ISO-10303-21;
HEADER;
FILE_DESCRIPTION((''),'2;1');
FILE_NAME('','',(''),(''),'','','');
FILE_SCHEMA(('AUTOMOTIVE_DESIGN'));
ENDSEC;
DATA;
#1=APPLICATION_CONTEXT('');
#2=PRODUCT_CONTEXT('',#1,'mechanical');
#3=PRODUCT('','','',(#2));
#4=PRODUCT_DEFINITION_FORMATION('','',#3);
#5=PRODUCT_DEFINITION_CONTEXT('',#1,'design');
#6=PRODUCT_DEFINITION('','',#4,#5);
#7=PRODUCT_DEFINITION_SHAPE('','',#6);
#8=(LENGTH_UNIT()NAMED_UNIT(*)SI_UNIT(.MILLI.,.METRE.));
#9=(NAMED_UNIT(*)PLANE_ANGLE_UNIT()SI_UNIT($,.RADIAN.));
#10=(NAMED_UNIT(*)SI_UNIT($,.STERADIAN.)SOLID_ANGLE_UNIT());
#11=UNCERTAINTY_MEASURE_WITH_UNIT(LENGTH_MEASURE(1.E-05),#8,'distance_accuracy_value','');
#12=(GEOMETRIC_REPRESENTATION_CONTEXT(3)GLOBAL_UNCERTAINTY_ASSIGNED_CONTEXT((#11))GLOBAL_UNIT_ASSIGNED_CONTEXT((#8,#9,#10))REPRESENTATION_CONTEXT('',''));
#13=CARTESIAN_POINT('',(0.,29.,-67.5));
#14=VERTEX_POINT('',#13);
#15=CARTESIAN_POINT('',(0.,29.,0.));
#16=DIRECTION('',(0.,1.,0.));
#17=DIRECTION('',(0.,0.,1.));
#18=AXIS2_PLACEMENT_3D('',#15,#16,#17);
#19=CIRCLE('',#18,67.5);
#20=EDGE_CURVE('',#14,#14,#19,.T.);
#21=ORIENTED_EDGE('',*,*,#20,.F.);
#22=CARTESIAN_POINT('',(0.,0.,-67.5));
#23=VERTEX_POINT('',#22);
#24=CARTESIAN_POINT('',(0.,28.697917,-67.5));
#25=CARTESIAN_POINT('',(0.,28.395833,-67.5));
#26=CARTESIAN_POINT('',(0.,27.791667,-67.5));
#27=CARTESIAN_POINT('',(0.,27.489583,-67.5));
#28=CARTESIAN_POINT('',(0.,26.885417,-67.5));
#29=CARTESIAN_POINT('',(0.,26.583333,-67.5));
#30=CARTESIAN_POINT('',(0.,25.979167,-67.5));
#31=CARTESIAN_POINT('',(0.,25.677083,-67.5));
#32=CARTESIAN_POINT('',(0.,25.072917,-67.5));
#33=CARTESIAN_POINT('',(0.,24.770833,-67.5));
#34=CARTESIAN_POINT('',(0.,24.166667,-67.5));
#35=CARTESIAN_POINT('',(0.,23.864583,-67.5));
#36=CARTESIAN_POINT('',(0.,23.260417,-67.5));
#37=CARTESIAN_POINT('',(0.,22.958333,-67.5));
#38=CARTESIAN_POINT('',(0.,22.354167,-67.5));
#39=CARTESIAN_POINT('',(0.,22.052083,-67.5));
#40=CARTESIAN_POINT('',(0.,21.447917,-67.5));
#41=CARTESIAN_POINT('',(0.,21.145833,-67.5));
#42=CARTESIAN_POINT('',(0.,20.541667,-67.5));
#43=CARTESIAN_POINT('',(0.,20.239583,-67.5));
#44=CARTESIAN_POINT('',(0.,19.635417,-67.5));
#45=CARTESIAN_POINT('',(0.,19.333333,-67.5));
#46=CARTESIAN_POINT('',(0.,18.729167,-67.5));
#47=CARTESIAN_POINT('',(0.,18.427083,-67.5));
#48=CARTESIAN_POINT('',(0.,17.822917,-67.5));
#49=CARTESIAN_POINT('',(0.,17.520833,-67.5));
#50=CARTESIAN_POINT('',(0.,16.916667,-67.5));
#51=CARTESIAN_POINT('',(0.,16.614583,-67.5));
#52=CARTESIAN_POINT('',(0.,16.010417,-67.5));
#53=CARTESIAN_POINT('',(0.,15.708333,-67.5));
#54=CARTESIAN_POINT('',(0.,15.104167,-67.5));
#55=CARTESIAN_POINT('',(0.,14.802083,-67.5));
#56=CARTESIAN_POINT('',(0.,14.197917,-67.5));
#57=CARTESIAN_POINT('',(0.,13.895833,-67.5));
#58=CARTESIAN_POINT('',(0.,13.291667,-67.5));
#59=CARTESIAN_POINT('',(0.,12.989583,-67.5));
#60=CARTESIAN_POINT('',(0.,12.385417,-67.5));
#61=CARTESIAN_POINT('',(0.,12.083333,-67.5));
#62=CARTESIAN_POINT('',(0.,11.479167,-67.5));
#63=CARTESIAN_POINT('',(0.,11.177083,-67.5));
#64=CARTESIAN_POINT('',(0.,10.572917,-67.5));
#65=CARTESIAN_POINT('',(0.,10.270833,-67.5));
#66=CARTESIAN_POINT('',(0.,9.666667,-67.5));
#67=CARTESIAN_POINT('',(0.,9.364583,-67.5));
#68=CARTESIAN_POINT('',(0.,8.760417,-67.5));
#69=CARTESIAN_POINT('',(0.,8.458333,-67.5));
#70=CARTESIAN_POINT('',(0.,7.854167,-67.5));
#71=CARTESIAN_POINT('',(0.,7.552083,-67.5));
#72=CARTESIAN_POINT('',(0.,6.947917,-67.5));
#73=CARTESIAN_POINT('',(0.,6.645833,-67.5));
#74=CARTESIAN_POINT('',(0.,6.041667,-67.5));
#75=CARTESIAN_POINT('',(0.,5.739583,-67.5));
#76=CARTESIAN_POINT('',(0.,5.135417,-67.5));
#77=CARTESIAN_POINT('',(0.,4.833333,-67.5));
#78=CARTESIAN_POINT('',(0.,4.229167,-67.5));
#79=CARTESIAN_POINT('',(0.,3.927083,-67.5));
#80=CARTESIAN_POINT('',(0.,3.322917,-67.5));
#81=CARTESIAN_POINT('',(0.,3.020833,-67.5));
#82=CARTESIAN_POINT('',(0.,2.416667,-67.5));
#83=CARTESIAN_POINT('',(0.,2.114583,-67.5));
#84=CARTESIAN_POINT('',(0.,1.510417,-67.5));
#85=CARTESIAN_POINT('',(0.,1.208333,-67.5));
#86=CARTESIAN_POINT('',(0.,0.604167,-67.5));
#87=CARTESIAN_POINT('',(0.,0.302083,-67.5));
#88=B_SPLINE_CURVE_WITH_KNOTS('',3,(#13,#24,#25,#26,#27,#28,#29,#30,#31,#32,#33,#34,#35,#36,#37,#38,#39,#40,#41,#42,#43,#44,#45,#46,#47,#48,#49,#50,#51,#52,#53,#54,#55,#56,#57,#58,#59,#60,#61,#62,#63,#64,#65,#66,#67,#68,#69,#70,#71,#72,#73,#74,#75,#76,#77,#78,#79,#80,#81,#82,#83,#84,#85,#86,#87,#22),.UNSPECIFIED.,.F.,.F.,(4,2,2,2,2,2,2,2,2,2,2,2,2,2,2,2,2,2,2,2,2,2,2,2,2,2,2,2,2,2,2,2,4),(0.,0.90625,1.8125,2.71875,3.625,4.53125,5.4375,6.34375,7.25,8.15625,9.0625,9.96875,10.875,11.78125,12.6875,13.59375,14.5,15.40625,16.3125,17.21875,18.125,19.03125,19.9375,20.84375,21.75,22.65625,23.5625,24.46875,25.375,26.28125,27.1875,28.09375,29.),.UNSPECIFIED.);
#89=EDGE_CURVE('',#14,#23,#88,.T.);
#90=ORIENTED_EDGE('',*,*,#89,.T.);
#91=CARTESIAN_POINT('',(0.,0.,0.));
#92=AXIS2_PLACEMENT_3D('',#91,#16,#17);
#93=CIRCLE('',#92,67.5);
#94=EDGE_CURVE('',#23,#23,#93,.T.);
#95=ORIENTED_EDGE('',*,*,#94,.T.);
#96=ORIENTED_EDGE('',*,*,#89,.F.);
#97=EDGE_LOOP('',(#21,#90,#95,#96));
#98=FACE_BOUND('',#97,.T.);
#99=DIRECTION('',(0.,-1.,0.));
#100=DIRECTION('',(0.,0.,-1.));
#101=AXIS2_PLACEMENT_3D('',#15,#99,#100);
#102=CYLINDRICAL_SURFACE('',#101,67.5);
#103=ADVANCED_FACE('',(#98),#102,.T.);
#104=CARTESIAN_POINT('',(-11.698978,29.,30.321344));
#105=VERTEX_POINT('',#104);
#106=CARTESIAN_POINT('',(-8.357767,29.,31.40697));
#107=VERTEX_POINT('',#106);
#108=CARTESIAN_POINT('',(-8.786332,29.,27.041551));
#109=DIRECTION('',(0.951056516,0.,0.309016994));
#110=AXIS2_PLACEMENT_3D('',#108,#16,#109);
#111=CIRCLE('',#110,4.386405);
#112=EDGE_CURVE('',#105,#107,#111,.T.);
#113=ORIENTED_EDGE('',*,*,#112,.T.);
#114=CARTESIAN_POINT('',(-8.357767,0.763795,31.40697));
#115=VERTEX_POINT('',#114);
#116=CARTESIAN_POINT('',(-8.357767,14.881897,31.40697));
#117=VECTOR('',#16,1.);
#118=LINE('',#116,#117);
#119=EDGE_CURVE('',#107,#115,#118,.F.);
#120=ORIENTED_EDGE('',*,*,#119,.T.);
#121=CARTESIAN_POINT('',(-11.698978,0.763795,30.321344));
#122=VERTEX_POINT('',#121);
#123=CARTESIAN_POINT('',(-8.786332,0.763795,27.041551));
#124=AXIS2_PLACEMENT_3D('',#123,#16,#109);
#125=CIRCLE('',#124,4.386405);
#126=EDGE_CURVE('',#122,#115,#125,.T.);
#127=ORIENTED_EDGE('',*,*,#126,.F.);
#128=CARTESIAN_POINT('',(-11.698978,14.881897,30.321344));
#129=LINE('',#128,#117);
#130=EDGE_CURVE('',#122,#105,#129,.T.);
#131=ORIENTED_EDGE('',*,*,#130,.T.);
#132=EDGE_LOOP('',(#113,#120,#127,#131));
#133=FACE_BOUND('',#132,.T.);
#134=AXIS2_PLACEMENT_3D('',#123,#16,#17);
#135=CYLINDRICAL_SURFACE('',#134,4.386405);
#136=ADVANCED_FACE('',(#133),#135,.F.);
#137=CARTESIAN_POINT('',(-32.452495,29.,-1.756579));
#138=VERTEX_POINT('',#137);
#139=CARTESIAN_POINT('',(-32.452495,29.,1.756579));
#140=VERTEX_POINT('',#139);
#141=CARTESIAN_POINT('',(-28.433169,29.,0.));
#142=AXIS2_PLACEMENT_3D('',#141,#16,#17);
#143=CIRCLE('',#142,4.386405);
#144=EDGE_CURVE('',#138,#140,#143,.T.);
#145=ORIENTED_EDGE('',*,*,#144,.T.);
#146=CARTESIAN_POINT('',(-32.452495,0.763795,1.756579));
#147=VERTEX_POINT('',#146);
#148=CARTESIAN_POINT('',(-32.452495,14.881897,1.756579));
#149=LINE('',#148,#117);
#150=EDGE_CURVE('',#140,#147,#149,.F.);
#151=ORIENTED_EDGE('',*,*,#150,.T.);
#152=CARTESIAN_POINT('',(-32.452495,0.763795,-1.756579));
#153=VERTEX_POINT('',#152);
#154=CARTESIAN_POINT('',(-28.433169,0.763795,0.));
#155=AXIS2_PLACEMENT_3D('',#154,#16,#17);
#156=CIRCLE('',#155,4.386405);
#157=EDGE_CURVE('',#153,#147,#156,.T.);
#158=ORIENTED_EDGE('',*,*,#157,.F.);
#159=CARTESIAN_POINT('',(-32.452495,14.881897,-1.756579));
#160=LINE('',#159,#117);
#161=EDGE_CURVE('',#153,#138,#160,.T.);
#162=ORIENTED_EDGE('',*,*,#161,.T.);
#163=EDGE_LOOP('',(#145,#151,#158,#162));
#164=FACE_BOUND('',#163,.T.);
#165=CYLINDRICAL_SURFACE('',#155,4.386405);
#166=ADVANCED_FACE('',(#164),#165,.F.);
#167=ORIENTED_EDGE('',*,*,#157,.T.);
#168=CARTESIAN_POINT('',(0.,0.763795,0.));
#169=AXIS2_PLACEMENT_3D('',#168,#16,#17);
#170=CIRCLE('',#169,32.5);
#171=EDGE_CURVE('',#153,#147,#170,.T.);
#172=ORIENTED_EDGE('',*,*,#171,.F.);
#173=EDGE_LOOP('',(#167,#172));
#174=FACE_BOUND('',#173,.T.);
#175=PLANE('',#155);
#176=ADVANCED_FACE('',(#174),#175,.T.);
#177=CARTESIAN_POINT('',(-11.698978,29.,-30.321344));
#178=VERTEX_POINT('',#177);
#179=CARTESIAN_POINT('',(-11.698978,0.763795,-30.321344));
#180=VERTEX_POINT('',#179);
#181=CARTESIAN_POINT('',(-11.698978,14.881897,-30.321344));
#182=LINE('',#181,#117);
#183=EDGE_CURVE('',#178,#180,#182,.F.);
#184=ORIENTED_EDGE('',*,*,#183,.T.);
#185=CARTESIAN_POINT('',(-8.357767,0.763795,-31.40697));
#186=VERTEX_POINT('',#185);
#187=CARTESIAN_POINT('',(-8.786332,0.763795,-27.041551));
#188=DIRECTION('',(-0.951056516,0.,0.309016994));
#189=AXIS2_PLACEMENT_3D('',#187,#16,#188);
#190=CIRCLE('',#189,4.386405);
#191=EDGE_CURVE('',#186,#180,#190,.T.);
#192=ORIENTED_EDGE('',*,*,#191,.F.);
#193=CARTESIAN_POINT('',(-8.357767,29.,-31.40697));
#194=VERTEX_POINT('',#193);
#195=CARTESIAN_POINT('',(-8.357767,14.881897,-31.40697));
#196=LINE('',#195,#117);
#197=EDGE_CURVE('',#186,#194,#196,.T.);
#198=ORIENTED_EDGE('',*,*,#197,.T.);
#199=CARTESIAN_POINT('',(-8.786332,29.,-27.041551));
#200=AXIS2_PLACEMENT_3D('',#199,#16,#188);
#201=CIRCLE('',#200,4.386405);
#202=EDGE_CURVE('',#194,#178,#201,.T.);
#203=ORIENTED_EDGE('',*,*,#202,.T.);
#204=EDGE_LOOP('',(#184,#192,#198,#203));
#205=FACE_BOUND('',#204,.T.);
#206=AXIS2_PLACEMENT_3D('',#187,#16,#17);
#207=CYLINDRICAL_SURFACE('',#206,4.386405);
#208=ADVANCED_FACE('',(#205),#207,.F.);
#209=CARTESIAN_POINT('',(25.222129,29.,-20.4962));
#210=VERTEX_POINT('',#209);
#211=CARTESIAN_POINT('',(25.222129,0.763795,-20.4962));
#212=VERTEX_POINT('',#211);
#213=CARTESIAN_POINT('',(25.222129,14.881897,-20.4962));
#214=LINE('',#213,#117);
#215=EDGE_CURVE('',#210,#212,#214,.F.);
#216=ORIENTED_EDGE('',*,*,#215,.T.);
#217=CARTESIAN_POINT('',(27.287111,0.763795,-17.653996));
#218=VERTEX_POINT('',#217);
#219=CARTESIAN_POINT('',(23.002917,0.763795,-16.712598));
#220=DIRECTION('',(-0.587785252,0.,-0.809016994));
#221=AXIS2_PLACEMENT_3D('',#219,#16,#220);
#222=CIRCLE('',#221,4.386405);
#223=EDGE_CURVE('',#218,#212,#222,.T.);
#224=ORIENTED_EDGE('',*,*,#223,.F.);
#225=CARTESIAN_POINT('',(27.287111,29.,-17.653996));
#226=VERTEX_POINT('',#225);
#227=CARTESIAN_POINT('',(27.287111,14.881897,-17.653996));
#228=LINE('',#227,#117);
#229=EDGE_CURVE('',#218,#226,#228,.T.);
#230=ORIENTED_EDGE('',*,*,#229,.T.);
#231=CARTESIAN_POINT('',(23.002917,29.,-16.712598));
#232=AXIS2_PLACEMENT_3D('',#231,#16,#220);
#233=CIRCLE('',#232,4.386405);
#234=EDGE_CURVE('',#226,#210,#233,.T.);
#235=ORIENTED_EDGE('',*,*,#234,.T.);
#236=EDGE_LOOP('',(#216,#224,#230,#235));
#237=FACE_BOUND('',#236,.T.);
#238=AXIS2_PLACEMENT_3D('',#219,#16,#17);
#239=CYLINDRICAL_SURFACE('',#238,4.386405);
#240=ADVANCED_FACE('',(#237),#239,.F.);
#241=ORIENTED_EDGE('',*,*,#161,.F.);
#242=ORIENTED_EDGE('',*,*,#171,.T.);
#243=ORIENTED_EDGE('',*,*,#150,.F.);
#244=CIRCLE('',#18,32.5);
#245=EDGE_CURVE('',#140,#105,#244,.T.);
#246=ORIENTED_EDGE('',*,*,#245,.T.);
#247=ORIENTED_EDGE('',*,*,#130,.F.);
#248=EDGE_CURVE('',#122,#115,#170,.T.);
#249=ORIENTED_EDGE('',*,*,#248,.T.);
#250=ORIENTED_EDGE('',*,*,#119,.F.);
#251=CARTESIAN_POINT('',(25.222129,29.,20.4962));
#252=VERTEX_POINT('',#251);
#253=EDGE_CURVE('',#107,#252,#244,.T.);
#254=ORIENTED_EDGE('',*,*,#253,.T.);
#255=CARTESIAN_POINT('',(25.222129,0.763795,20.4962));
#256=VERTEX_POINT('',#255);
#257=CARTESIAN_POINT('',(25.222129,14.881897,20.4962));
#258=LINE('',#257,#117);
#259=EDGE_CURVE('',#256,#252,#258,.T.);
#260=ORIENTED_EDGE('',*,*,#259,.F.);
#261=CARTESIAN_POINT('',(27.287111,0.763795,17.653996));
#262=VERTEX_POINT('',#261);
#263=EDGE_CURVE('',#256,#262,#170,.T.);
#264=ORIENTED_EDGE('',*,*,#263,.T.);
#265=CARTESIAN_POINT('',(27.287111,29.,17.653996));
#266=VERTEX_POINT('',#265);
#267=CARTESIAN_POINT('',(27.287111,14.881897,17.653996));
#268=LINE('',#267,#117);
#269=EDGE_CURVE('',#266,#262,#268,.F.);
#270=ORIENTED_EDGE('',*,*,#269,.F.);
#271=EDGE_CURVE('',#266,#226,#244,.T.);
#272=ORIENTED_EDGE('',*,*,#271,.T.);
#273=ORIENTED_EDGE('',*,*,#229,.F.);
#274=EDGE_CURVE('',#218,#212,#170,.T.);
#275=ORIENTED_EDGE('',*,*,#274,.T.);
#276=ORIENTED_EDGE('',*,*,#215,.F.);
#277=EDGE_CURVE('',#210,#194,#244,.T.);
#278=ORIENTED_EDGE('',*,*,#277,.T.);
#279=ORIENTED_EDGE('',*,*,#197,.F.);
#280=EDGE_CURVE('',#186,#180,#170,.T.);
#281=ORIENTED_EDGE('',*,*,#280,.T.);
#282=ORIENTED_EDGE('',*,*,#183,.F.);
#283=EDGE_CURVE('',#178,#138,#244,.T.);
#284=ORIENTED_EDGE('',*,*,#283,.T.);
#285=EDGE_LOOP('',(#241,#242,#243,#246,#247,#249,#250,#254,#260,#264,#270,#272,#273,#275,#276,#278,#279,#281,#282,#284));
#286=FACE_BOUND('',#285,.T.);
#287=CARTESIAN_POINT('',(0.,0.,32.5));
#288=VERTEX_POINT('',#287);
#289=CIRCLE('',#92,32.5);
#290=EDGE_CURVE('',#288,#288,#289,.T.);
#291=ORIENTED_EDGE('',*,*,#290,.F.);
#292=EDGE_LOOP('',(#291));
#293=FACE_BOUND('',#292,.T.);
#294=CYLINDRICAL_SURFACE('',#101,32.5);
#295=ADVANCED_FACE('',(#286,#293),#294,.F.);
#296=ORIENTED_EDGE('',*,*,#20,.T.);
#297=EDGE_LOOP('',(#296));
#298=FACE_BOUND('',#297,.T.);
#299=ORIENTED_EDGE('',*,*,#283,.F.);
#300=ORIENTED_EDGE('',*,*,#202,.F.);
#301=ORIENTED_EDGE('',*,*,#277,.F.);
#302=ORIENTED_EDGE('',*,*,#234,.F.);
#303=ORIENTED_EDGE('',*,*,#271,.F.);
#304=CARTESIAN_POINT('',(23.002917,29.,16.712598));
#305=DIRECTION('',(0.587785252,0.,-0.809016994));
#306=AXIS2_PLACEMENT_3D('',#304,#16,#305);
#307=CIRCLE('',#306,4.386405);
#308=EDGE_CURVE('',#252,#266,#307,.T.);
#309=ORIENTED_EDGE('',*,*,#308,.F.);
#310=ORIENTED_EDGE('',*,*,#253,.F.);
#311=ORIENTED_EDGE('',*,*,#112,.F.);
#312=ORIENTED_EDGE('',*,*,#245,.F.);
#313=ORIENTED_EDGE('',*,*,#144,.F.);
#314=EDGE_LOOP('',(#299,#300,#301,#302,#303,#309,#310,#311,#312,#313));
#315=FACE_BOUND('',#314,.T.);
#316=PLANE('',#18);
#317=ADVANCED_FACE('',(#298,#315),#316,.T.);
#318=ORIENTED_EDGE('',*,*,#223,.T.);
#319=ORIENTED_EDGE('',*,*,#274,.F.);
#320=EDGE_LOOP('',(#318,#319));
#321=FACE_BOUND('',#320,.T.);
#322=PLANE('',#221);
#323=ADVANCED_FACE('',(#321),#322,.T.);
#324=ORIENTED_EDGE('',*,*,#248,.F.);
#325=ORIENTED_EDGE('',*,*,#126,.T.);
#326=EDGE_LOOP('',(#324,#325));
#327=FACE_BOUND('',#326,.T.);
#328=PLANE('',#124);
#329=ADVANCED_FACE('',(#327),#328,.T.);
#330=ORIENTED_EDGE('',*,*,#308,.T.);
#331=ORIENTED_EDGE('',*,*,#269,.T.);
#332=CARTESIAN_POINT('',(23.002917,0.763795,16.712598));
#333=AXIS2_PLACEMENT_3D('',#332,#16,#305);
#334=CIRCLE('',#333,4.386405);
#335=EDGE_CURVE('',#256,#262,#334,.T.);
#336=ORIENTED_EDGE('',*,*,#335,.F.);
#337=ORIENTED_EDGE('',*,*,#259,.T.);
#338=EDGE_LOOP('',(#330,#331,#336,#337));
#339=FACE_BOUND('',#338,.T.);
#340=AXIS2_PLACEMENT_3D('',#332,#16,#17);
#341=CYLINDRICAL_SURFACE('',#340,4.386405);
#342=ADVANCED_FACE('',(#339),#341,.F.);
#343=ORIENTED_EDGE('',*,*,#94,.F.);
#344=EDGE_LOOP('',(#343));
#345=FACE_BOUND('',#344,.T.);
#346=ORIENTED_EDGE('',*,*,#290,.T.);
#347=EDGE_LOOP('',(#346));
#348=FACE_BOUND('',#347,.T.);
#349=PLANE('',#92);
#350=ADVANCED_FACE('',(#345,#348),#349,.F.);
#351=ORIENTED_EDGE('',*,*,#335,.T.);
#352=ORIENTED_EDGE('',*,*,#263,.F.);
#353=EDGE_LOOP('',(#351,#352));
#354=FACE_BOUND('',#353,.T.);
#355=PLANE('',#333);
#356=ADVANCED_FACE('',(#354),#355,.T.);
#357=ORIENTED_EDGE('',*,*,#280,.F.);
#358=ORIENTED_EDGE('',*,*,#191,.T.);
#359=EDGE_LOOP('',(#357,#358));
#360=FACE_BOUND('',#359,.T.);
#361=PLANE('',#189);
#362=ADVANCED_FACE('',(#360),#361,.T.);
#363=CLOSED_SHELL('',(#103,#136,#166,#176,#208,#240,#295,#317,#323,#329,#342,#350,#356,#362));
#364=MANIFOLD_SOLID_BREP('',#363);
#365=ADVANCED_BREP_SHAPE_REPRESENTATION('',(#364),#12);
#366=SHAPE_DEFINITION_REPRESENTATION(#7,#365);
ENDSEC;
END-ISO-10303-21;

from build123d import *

# Parameters (mm, degrees)
SKETCH1_R           = 67.5
BOSS_EXTRUDE1_DEPTH = 29
SKETCH2_R           = 32.5
CUT_EXTRUDE1_DEPTH  = 100.767229089
SKETCH3_R           = 4.38640504
CUT_EXTRUDE2_DEPTH  = 28.236205131
CIRPATTERN1_COUNT   = 5


with BuildPart() as part:
    # Sketch1 → Boss-Extrude1 (new body)
    with BuildSketch(Plane(origin=(0, 0, 0), x_dir=(1, 0, 0), z_dir=(0, 1, 0))):
        Circle(SKETCH1_R)
    extrude(amount=BOSS_EXTRUDE1_DEPTH)

    # Sketch2 → Cut-Extrude1 (cut, through all)
    with BuildSketch(Plane(origin=(0, 0, 0), x_dir=(1, 0, 0), z_dir=(0, 1, 0))):
        Circle(SKETCH2_R)
    extrude(amount=CUT_EXTRUDE1_DEPTH, mode=Mode.SUBTRACT)

    # Sketch3 → Cut-Extrude2 (cut)
    with BuildSketch(Plane(origin=(0, 29, 0), x_dir=(1, 0, 0), z_dir=(0, 1, 0))):
        with Locations((-28.433169158, 0)):
            Circle(SKETCH3_R)
    cut_extrude2 = extrude(amount=-CUT_EXTRUDE2_DEPTH, mode=Mode.SUBTRACT)

    # CirPattern1: Cut-Extrude2 ×5 about axis
    cirpattern1_axis = Axis((0, 0, 0), (0, 1, 0))
    for i in range(1, CIRPATTERN1_COUNT):
        add(cut_extrude2.rotate(cirpattern1_axis, i * 360 / CIRPATTERN1_COUNT), mode=Mode.SUBTRACT)


solid = part.part
